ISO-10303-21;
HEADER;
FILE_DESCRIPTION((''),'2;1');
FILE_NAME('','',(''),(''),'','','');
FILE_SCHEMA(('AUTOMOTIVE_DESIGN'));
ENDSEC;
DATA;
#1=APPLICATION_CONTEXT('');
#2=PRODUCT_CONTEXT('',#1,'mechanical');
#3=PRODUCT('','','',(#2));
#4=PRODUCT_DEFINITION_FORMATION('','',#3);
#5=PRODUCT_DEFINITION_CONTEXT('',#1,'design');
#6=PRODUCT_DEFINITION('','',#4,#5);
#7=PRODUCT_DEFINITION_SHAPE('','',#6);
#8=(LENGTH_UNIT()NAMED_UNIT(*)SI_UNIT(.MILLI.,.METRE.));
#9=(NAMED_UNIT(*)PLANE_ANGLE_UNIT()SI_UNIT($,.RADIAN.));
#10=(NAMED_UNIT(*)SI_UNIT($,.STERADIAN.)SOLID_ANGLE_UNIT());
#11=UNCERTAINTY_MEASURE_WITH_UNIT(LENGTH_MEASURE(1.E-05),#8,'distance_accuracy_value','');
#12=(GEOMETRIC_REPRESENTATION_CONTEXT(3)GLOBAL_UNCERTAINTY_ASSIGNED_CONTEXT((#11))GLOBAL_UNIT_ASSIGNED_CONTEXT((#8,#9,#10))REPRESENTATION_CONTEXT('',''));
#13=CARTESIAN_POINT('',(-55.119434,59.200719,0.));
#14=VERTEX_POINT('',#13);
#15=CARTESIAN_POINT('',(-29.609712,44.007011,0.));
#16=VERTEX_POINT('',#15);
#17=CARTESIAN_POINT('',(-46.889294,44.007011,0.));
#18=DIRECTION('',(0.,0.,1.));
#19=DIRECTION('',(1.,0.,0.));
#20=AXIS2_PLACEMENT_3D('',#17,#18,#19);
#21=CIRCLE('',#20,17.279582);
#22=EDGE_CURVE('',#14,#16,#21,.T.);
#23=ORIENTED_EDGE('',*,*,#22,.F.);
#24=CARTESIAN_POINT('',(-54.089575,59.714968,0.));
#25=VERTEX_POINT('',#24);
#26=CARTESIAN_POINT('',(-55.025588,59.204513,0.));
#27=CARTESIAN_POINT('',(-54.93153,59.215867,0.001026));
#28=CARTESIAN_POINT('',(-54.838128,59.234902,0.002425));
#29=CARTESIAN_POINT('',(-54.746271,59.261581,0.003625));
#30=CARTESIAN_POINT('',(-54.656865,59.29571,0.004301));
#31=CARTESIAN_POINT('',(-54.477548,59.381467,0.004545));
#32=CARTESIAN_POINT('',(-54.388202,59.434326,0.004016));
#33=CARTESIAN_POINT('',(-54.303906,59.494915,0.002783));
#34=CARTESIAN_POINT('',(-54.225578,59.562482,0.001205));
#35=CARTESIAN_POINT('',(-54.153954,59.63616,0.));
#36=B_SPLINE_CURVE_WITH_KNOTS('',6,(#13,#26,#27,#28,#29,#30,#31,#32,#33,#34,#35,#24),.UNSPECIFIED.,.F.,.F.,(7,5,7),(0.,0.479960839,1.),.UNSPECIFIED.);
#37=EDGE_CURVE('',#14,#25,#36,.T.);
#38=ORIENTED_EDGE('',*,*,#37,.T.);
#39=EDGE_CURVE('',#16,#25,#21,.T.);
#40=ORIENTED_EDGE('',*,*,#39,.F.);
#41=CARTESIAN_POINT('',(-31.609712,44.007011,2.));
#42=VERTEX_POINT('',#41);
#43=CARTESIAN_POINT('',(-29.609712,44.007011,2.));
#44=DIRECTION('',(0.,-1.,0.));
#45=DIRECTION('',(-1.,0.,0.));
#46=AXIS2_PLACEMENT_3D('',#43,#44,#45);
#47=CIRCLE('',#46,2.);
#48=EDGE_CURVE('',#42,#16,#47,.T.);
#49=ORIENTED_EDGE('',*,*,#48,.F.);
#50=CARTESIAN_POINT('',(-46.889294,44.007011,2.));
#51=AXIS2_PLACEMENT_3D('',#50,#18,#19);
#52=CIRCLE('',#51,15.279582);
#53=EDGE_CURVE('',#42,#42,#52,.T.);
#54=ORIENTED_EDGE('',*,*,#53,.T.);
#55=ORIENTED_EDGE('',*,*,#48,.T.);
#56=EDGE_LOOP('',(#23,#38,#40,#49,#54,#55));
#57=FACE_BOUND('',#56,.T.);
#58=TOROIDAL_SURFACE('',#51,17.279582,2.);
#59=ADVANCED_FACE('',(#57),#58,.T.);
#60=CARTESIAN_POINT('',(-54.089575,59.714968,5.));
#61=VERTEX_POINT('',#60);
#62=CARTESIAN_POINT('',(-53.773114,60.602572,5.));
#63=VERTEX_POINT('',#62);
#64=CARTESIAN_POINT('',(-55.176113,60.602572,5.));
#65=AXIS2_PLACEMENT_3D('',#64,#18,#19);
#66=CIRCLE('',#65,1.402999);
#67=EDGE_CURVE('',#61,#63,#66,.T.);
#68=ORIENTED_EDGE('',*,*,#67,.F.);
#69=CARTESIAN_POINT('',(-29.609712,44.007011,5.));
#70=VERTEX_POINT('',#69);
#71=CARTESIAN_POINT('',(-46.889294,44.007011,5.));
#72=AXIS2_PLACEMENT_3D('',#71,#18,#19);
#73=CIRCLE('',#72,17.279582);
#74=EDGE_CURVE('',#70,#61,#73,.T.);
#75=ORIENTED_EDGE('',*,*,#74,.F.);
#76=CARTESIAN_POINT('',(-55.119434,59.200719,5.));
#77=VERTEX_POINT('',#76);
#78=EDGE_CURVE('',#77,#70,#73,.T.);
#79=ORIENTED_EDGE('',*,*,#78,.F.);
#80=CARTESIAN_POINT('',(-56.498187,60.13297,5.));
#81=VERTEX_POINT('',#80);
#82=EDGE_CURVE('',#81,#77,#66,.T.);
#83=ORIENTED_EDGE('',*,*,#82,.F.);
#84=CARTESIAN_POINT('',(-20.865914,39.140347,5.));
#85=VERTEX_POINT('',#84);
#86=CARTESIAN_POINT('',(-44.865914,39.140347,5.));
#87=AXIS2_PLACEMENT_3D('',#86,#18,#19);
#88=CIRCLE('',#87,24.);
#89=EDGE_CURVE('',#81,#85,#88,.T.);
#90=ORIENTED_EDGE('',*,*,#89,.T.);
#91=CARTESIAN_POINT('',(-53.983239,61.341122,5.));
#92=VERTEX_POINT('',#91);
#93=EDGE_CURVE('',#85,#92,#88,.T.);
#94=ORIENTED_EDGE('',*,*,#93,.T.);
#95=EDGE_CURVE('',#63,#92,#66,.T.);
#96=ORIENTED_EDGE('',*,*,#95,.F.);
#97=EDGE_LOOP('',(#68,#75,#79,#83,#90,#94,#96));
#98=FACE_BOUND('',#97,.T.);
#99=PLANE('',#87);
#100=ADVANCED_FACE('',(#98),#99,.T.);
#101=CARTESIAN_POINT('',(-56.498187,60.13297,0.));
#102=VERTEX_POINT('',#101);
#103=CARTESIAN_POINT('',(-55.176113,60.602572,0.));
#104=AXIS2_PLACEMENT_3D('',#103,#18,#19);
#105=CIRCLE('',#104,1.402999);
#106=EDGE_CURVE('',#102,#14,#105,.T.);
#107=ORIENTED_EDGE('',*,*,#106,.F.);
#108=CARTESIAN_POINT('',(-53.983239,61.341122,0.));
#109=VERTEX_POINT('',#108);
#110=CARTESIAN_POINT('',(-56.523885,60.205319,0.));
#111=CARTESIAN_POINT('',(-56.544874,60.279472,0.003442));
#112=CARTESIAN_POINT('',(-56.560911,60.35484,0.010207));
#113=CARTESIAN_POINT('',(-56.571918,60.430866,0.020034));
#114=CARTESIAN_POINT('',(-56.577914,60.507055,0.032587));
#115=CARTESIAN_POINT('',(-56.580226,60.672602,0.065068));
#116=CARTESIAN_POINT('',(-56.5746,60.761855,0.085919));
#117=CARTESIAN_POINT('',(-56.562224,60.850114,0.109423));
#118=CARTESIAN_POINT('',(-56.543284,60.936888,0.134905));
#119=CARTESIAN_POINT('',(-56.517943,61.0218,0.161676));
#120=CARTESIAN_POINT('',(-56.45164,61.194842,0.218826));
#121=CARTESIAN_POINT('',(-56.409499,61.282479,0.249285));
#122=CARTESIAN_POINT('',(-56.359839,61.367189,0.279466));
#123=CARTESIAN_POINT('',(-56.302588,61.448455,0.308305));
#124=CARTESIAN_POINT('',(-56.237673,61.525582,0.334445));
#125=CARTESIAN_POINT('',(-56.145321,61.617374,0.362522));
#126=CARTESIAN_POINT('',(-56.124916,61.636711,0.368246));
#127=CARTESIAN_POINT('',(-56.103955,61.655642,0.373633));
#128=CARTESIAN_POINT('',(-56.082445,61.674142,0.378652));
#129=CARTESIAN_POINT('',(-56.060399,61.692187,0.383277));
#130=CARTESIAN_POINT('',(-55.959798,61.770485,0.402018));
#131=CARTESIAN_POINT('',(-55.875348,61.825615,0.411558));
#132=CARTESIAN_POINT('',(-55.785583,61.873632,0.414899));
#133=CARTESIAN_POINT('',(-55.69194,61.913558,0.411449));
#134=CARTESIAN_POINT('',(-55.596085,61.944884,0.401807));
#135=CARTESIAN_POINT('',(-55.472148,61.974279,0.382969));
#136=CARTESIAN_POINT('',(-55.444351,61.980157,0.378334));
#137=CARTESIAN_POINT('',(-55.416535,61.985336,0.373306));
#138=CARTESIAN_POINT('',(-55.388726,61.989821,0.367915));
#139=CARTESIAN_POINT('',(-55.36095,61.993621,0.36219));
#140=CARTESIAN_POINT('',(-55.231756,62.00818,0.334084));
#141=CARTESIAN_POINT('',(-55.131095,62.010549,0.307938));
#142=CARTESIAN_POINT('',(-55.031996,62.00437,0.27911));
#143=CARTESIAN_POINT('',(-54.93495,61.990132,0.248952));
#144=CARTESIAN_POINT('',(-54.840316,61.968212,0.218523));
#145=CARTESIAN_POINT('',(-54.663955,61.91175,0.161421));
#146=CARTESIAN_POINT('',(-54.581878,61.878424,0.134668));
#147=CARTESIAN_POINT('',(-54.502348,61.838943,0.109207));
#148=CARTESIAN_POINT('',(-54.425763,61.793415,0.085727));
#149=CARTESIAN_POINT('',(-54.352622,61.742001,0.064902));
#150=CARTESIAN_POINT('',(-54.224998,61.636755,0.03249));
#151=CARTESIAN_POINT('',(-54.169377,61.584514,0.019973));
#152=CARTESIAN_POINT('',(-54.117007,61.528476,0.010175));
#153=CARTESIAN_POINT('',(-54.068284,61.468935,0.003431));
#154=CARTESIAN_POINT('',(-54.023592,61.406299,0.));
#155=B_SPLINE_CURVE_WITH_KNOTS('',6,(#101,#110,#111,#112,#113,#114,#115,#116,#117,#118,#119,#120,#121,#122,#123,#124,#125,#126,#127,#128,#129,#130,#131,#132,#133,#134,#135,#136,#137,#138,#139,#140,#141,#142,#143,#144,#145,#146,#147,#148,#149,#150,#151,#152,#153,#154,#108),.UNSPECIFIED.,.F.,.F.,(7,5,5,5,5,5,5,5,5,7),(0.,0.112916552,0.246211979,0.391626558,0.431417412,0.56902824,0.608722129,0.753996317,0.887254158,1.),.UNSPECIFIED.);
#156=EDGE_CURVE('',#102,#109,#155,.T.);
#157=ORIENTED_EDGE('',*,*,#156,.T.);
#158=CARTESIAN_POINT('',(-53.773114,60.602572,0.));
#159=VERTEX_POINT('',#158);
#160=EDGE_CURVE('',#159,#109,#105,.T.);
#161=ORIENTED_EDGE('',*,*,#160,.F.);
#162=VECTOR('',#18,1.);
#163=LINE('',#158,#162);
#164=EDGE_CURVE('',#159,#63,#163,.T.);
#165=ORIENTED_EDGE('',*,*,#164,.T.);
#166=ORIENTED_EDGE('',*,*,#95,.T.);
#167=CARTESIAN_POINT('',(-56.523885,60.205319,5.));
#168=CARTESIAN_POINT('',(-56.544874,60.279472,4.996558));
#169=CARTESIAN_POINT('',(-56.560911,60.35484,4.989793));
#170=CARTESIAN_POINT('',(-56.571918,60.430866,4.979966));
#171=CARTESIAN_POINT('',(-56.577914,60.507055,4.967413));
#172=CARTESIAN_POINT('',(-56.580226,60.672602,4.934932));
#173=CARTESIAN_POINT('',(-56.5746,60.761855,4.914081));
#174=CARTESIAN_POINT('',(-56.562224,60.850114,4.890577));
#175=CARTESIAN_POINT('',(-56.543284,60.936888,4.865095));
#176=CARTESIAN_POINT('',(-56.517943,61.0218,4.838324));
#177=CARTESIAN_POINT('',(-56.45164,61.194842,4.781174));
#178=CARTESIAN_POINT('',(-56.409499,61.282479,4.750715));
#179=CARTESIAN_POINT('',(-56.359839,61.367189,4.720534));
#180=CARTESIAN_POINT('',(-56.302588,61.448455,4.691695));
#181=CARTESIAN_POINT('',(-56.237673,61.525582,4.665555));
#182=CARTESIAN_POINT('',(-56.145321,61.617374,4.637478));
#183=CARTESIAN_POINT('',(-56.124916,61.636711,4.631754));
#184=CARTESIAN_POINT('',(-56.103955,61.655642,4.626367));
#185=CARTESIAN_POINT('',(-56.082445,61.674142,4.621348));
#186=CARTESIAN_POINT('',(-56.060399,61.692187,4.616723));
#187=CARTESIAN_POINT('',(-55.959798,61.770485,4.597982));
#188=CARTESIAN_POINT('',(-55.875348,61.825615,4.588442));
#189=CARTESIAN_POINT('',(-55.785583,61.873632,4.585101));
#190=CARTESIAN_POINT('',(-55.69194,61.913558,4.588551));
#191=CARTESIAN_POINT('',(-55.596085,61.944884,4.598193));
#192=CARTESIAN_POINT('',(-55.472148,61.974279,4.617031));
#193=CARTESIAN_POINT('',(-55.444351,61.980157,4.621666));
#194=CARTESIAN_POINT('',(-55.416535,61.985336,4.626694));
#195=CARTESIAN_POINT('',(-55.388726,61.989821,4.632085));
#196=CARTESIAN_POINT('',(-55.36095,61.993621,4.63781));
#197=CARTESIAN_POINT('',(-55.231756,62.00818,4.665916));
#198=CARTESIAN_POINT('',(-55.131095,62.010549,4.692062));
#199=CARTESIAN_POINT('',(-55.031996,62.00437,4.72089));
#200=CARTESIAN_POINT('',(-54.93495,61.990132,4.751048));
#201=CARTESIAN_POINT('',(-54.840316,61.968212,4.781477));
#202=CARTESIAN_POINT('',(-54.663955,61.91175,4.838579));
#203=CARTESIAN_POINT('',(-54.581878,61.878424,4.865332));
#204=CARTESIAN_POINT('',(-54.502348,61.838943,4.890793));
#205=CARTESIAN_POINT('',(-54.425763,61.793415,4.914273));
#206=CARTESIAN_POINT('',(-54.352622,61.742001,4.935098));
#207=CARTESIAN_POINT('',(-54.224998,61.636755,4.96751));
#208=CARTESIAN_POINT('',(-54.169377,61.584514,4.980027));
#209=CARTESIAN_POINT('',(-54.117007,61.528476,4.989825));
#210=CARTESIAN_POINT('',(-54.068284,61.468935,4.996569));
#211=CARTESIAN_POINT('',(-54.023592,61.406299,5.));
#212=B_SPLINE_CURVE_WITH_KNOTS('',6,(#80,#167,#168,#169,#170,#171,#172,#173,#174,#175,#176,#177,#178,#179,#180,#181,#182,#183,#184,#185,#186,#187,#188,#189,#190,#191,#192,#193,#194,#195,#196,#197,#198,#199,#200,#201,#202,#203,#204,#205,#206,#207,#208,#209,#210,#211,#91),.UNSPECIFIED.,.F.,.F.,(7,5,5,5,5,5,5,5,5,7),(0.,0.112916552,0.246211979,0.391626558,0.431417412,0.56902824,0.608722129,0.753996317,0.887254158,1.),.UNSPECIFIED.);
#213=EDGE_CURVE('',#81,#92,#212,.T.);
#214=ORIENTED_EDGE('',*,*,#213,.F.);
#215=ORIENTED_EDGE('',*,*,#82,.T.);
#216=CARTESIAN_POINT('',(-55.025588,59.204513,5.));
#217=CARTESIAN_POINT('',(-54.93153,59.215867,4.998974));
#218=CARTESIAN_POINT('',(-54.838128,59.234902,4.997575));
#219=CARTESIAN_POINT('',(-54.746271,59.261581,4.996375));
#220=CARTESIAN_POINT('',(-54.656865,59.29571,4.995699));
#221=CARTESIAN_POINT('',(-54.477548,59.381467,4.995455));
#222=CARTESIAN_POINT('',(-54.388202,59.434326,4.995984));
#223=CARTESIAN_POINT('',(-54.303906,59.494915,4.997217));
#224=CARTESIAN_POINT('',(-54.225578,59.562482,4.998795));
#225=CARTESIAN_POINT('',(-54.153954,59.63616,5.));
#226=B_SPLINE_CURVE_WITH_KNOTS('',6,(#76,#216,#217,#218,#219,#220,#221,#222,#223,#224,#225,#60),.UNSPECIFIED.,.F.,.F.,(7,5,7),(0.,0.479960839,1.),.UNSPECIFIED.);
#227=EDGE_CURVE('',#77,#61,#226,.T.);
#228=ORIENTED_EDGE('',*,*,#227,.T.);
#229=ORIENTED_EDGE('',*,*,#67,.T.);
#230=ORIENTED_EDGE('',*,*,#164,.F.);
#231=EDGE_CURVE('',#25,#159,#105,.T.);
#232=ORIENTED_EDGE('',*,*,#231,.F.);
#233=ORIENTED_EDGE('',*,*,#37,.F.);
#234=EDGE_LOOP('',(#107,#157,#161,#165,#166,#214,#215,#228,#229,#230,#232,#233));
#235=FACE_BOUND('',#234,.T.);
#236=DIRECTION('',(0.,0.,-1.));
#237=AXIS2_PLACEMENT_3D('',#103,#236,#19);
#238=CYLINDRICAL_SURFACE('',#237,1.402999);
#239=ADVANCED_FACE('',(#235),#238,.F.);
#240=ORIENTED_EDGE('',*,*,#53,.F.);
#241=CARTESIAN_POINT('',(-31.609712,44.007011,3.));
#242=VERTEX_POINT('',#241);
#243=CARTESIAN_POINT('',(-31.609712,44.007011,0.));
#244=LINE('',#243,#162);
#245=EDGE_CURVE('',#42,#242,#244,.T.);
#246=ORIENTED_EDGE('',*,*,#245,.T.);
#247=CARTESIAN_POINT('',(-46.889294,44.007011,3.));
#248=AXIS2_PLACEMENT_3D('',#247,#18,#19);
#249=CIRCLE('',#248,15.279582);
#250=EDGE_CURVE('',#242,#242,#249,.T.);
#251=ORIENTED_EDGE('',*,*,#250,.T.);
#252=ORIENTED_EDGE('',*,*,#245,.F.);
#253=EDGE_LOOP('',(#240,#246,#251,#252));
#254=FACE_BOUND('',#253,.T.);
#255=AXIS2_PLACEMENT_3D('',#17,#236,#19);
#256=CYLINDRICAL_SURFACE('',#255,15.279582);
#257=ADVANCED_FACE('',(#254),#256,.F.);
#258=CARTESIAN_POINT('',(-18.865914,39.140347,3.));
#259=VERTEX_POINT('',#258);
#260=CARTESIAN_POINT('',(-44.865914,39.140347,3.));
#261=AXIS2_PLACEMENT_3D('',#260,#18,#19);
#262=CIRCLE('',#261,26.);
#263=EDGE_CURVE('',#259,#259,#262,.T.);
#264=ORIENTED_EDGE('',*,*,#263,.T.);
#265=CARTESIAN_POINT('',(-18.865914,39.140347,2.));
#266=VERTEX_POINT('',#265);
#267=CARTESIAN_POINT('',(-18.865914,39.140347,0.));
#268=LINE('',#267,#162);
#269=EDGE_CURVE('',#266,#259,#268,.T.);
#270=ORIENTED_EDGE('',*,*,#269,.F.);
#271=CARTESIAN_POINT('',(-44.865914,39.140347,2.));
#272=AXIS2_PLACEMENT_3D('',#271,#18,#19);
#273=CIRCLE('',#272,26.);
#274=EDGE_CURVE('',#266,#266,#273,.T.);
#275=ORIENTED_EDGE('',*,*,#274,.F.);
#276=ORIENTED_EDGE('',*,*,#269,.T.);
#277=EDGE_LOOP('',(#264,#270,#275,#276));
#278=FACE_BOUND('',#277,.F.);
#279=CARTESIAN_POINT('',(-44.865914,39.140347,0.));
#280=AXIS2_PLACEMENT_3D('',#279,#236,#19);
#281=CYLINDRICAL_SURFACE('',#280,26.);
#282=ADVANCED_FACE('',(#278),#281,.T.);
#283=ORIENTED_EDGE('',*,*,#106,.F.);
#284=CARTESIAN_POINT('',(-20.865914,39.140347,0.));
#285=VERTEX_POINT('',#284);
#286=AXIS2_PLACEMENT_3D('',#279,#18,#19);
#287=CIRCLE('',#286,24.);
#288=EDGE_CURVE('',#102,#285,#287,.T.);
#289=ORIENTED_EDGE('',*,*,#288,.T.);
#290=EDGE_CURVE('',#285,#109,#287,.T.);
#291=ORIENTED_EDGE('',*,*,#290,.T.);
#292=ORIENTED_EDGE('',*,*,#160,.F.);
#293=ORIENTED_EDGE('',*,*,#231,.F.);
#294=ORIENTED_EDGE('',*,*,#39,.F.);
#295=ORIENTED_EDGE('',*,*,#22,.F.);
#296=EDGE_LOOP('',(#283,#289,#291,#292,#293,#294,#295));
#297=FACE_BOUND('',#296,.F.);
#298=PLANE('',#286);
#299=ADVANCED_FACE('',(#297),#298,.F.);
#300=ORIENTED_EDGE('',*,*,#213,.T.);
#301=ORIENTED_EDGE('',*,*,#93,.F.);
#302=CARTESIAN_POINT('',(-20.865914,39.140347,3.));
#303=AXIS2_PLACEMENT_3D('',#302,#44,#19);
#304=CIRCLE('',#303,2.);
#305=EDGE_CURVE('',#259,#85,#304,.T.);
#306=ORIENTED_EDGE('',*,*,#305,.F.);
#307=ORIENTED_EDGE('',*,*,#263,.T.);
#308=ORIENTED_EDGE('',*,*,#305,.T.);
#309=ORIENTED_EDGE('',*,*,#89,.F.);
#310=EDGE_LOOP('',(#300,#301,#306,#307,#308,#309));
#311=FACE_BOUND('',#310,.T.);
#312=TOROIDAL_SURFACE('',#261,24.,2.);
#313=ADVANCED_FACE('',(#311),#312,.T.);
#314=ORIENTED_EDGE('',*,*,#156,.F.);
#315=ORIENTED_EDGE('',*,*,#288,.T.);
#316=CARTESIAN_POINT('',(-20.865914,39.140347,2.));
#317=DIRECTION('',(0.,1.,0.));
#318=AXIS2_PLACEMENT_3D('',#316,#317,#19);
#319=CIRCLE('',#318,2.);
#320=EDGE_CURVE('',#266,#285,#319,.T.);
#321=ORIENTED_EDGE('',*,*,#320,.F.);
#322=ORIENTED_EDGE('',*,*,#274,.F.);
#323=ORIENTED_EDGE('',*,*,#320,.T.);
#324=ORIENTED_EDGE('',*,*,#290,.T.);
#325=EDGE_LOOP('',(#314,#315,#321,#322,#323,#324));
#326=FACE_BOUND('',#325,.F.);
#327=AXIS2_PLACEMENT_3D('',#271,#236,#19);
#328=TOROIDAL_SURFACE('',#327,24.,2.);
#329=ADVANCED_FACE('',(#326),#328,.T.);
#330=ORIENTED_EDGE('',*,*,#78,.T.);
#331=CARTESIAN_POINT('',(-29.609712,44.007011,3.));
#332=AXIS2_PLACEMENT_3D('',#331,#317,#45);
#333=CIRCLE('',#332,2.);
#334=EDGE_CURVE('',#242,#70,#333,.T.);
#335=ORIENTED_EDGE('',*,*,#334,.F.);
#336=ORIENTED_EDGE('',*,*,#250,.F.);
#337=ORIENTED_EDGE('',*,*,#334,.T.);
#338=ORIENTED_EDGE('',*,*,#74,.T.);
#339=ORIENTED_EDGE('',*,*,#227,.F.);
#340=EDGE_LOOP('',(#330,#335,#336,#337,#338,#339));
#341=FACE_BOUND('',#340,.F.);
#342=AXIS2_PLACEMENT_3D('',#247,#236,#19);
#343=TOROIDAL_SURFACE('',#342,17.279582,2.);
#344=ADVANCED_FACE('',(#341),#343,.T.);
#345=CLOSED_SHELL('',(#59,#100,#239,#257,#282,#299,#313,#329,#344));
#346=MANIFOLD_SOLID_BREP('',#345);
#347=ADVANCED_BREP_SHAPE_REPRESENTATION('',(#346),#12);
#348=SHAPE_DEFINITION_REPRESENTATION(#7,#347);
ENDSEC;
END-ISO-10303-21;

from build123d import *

# Parameters (mm, degrees)
F0_R     = 26
F0_R_2   = 15.2795824113
F0_R_3   = 1.4029986266
F1_DEPTH = 5


# Not quite as in the source:
# - a fillet or chamfer that OpenCascade refuses, or shapes differently, is made with other operations: its cross-section is extruded or revolved along the edge and cut away or added


with BuildPart() as f1:
    # F0 (on Top) → F1 (new body)
    with BuildSketch(Plane.XY):
        with Locations((-44.8659136891, 39.1403473914)):
            Circle(F0_R)
        with Locations((-46.8892939389, 44.0070107579)):
            Circle(F0_R_2, mode=Mode.SUBTRACT)
        with Locations((-55.1761128008, 60.6025718153)):
            Circle(F0_R_3, mode=Mode.SUBTRACT)
    extrude(amount=F1_DEPTH)

    # F2: fillet of radius 2 on 4 edges, made by hand

    # F2_s1 → F2_t2 (revolve, cut)
    with BuildSketch(Plane.XZ.offset(-39.1403473914)):
        with BuildLine():
            ThreePointArc((-18.8659136891, 3), (-19.4517001268, 4.4142135624), (-20.8659136891, 5))
            Line((-20.8659136891, 5), (-18.8659136891, 5))
            Line((-18.8659136891, 5), (-18.8659136891, 3))
        make_face()
    revolve(axis=Axis((-44.8659136891, 39.1403473914, 5), (0, 0, 1)), mode=Mode.SUBTRACT)

    # F2_s3 → F2_t4 (revolve, cut)
    with BuildSketch(Plane.XZ.offset(-39.1403473914)):
        with BuildLine():
            ThreePointArc((-18.8659136891, 2), (-19.4517001268, 0.5857864376), (-20.8659136891, 0))
            Line((-20.8659136891, 0), (-18.8659136891, 0))
            Line((-18.8659136891, 0), (-18.8659136891, 2))
        make_face()
    revolve(axis=Axis((-44.8659136891, 39.1403473914, 0), (0, 0, 1)), mode=Mode.SUBTRACT)

    # F2_s5 → F2_t6 (revolve, cut)
    with BuildSketch(Plane.XZ.offset(-44.0070107579)):
        with BuildLine():
            ThreePointArc((-31.6097115275, 3), (-31.0239250899, 4.4142135624), (-29.6097115275, 5))
            Line((-29.6097115275, 5), (-31.6097115275, 5))
            Line((-31.6097115275, 5), (-31.6097115275, 3))
        make_face()
    revolve(axis=Axis((-46.8892939389, 44.0070107579, 5), (0, 0, 1)), mode=Mode.SUBTRACT)

    # F2_s7 → F2_t8 (revolve, cut)
    with BuildSketch(Plane.XZ.offset(-44.0070107579)):
        with BuildLine():
            ThreePointArc((-31.6097115275, 2), (-31.0239250899, 0.5857864376), (-29.6097115275, 0))
            Line((-29.6097115275, 0), (-31.6097115275, 0))
            Line((-31.6097115275, 0), (-31.6097115275, 2))
        make_face()
    revolve(axis=Axis((-46.8892939389, 44.0070107579, 0), (0, 0, 1)), mode=Mode.SUBTRACT)


solid = f1.part
